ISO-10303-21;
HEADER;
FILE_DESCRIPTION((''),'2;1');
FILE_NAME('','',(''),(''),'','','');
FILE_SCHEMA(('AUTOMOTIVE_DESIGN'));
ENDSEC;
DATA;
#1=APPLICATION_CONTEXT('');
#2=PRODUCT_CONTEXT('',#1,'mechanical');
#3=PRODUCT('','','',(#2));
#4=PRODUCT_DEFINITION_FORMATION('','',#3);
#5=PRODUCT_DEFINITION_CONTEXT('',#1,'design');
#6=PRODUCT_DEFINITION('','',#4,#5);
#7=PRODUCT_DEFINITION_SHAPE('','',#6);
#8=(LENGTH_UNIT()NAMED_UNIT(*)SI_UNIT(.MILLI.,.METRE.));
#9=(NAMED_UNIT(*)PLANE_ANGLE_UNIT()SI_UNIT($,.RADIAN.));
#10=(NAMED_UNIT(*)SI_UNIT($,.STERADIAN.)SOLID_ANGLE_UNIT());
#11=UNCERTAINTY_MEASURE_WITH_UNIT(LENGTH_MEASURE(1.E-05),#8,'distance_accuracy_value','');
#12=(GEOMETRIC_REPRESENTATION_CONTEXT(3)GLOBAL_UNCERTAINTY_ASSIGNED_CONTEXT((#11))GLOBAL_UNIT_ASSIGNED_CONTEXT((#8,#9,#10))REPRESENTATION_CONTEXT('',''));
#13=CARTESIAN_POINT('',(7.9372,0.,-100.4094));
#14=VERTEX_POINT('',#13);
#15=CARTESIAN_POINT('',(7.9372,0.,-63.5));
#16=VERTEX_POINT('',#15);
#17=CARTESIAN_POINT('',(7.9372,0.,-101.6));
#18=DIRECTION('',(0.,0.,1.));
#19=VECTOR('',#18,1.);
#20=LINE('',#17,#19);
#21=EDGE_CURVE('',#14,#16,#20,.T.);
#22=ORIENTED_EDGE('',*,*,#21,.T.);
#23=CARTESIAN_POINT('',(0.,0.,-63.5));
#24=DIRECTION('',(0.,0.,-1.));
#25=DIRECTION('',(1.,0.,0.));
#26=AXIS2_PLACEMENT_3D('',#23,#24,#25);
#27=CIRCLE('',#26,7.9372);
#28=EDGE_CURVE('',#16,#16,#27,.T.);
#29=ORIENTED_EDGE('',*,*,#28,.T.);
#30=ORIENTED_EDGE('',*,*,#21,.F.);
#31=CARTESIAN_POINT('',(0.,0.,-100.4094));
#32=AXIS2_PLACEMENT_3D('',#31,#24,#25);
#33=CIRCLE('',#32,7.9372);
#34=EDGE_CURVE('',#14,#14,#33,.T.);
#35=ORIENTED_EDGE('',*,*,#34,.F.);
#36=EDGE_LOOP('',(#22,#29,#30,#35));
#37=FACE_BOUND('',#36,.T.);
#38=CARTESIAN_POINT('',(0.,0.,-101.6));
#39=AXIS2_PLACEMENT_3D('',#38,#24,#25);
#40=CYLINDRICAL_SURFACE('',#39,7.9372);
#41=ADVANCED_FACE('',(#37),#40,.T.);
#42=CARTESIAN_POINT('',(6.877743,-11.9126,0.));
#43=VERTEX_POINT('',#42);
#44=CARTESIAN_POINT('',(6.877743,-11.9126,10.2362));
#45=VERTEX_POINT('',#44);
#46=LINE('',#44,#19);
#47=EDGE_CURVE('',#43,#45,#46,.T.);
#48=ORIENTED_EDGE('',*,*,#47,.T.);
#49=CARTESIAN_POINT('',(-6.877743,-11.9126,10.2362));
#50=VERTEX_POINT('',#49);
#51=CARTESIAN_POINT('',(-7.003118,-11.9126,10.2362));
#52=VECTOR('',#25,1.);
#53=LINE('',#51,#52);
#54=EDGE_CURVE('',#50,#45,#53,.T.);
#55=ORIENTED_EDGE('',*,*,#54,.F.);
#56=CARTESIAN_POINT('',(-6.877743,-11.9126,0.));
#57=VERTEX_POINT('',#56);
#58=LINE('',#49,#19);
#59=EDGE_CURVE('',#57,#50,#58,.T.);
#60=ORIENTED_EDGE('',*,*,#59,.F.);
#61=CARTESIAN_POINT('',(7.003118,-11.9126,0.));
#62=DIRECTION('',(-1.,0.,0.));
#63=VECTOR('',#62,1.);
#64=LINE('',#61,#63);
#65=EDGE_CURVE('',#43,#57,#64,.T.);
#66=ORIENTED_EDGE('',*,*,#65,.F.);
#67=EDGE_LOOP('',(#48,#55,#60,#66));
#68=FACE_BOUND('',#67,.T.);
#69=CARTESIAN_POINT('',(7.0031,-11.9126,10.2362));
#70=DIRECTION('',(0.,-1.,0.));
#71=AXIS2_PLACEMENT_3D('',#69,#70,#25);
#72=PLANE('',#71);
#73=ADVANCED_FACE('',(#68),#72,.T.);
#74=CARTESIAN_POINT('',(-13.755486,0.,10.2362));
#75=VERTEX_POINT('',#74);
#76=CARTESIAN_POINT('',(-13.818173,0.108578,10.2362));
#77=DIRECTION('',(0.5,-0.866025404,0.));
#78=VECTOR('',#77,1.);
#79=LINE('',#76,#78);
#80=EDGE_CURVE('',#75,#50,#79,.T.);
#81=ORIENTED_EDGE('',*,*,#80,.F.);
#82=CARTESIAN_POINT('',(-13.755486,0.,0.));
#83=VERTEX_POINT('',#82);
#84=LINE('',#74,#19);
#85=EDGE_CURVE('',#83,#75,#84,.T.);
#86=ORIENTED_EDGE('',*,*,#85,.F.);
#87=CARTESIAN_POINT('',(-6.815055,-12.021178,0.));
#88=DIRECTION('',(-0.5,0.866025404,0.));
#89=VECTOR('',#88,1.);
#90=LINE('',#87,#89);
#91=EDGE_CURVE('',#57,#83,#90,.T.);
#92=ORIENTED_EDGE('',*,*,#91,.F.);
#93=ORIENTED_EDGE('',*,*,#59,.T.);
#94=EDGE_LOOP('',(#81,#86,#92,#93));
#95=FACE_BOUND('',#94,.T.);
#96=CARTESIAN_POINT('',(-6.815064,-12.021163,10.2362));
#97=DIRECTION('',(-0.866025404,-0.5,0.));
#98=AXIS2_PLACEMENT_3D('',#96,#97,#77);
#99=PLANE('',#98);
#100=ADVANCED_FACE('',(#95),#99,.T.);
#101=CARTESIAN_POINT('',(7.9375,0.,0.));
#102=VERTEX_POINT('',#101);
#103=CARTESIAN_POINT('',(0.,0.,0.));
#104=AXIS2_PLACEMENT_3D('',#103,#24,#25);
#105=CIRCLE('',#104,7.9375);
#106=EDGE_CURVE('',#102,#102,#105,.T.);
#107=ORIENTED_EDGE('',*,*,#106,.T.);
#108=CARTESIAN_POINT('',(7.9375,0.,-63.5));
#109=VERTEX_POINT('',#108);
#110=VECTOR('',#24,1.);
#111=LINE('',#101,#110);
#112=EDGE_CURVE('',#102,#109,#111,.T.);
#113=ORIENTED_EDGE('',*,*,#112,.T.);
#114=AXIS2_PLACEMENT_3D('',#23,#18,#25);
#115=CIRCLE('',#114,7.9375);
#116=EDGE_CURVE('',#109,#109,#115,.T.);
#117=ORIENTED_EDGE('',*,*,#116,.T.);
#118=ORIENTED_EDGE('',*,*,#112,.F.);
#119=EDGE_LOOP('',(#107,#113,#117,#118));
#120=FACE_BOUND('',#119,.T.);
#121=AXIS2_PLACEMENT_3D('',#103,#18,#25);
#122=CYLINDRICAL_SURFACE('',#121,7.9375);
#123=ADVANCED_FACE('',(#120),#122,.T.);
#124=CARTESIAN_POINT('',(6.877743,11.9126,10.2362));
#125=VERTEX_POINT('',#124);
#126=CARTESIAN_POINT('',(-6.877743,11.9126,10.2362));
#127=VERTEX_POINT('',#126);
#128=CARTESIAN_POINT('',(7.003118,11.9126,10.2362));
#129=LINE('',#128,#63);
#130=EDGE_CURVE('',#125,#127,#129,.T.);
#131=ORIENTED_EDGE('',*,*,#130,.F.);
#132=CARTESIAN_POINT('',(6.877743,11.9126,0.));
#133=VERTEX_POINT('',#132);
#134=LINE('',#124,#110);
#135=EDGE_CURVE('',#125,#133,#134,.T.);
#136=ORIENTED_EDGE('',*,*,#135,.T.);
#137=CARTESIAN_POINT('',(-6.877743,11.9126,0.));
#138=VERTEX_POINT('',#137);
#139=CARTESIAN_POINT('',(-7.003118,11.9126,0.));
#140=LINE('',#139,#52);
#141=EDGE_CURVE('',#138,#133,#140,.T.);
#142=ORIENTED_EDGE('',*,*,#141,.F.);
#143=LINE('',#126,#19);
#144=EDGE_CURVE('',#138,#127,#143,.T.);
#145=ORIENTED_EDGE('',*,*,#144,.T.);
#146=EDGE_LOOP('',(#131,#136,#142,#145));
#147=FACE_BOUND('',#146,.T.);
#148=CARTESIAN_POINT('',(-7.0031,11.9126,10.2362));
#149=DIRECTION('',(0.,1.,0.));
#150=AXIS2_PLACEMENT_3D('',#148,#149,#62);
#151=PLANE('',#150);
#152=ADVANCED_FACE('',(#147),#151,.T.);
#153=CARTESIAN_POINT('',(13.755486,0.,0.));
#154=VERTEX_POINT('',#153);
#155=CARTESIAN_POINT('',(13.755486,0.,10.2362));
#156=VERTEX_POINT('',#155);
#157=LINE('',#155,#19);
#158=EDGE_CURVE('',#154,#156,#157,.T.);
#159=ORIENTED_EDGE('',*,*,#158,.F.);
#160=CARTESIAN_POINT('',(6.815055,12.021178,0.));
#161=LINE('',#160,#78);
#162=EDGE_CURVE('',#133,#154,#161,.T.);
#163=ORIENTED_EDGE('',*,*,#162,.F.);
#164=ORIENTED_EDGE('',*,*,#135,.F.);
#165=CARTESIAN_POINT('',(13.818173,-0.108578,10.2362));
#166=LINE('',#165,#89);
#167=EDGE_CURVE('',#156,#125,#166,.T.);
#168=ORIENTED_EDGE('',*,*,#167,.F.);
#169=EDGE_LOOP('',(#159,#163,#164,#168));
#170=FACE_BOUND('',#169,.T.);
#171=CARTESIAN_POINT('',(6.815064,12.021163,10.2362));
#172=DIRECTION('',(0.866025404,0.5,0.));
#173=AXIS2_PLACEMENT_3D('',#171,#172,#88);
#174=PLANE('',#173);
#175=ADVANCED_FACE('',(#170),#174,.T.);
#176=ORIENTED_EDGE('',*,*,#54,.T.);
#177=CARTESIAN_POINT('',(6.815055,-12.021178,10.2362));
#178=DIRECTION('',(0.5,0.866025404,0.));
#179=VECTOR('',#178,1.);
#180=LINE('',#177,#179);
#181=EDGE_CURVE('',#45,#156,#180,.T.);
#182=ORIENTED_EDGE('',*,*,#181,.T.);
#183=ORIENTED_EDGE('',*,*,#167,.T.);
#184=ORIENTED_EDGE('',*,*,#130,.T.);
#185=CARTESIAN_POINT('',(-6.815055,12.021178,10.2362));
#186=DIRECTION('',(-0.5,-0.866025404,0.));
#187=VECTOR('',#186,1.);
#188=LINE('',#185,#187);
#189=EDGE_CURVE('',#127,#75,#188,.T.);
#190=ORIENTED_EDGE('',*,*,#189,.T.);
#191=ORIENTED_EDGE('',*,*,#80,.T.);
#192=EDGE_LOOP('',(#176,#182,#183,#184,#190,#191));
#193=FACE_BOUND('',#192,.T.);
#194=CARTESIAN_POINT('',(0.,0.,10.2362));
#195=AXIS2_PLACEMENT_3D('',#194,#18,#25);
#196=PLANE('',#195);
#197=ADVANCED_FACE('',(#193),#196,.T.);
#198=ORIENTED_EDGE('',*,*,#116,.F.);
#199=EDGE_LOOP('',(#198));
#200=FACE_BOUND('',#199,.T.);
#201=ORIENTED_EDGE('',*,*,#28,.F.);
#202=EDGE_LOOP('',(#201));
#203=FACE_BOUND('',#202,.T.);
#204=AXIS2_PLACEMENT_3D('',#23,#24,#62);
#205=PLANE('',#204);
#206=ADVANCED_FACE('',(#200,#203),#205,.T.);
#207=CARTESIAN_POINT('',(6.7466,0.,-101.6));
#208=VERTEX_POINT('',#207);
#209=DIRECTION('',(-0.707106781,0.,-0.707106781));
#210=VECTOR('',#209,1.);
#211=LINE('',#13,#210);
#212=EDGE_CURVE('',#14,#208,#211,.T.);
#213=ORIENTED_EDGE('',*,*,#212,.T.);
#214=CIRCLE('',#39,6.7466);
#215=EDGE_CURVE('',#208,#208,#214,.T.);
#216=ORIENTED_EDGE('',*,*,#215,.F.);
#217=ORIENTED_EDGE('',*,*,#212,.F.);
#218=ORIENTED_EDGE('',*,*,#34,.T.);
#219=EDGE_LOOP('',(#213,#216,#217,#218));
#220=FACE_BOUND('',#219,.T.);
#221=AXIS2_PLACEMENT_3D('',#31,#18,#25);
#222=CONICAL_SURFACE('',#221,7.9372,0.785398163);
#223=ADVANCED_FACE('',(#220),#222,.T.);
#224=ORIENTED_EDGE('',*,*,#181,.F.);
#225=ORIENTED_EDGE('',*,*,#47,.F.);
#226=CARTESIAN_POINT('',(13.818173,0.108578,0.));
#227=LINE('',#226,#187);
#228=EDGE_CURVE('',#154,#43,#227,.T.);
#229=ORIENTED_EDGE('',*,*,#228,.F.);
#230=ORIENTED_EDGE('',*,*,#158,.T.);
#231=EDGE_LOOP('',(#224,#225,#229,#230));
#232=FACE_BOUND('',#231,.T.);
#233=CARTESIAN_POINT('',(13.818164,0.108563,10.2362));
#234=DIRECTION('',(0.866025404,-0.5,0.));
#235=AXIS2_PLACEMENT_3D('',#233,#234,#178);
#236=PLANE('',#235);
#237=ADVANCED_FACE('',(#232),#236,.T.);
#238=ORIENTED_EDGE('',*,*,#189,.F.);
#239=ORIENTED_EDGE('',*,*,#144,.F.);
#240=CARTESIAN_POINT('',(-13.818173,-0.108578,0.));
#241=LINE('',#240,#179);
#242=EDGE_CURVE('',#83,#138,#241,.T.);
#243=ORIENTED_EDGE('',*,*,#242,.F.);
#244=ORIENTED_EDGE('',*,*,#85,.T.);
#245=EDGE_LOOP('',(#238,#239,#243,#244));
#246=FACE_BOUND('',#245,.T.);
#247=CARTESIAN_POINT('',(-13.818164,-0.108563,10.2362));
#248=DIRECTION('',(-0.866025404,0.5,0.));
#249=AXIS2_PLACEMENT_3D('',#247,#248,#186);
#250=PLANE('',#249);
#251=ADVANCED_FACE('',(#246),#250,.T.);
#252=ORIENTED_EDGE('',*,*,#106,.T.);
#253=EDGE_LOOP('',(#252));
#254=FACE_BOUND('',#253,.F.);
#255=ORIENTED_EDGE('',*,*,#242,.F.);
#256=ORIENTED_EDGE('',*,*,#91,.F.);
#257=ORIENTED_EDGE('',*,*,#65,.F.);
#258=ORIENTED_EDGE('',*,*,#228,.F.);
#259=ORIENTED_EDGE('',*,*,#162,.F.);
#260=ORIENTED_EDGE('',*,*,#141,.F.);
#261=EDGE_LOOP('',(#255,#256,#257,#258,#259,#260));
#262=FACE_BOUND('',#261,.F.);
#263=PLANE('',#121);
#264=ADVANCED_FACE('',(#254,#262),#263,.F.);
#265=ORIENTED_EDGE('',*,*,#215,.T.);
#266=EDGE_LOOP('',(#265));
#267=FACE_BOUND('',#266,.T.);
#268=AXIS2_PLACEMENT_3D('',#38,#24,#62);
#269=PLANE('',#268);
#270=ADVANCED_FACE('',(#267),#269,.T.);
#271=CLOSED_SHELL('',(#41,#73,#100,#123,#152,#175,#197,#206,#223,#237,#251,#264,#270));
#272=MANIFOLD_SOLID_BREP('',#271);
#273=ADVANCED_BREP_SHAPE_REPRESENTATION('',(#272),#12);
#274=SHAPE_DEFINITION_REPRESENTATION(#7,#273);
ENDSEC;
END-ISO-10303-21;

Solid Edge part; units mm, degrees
sketch "Sketch1" plane through (0, 0, 0) normal (0, 0, 1) x (1, 0, 0)
  circle A0 centre (0, 0) radius 13.8186
  dimension "D1" = 27.6372
extrude "Protrusion1" add sketch "Sketch1" along normal blind 10.2362
sketch "Sketch2" plane through (0, 0, 0) normal (0, 0, -1) x (1, 0, 0)
  circle A0 centre (0, 0) radius 7.9375
extrude "Protrusion2" add sketch "Sketch2" along normal blind 101.6
sketch "Sketch3" plane through (0, 0, -101.6) normal (0, 0, -1) x (1, 0, 0)
  circle A0 centre (0, 0) radius 7.9372
extrude "Cutout1" cut sketch "Sketch3" against normal blind 38.1 flip side to cut
chamfer "Chamfer_1" distance 1.1906 angle 45 1 edges at (-7.9372, 0, -101.6)
sketch "Sketch4" plane through (0, 0, 10.2362) normal (0, 0, 1) x (1, 0, 0)
  line L0 (-7.0031, 11.9126) -> (7.0031, 11.9126)
  dimension "D1" = 23.8252
extrude "Cutout2" cut sketch "Sketch4" against normal up to next material side at (0, 11.9626, 10.2362)
pattern_circular "Pattern1" count 6 over 360 about axis through (0, 0, 10.2362) along (0, 0, 1) of "Cutout2"
properties part number "24104200"
